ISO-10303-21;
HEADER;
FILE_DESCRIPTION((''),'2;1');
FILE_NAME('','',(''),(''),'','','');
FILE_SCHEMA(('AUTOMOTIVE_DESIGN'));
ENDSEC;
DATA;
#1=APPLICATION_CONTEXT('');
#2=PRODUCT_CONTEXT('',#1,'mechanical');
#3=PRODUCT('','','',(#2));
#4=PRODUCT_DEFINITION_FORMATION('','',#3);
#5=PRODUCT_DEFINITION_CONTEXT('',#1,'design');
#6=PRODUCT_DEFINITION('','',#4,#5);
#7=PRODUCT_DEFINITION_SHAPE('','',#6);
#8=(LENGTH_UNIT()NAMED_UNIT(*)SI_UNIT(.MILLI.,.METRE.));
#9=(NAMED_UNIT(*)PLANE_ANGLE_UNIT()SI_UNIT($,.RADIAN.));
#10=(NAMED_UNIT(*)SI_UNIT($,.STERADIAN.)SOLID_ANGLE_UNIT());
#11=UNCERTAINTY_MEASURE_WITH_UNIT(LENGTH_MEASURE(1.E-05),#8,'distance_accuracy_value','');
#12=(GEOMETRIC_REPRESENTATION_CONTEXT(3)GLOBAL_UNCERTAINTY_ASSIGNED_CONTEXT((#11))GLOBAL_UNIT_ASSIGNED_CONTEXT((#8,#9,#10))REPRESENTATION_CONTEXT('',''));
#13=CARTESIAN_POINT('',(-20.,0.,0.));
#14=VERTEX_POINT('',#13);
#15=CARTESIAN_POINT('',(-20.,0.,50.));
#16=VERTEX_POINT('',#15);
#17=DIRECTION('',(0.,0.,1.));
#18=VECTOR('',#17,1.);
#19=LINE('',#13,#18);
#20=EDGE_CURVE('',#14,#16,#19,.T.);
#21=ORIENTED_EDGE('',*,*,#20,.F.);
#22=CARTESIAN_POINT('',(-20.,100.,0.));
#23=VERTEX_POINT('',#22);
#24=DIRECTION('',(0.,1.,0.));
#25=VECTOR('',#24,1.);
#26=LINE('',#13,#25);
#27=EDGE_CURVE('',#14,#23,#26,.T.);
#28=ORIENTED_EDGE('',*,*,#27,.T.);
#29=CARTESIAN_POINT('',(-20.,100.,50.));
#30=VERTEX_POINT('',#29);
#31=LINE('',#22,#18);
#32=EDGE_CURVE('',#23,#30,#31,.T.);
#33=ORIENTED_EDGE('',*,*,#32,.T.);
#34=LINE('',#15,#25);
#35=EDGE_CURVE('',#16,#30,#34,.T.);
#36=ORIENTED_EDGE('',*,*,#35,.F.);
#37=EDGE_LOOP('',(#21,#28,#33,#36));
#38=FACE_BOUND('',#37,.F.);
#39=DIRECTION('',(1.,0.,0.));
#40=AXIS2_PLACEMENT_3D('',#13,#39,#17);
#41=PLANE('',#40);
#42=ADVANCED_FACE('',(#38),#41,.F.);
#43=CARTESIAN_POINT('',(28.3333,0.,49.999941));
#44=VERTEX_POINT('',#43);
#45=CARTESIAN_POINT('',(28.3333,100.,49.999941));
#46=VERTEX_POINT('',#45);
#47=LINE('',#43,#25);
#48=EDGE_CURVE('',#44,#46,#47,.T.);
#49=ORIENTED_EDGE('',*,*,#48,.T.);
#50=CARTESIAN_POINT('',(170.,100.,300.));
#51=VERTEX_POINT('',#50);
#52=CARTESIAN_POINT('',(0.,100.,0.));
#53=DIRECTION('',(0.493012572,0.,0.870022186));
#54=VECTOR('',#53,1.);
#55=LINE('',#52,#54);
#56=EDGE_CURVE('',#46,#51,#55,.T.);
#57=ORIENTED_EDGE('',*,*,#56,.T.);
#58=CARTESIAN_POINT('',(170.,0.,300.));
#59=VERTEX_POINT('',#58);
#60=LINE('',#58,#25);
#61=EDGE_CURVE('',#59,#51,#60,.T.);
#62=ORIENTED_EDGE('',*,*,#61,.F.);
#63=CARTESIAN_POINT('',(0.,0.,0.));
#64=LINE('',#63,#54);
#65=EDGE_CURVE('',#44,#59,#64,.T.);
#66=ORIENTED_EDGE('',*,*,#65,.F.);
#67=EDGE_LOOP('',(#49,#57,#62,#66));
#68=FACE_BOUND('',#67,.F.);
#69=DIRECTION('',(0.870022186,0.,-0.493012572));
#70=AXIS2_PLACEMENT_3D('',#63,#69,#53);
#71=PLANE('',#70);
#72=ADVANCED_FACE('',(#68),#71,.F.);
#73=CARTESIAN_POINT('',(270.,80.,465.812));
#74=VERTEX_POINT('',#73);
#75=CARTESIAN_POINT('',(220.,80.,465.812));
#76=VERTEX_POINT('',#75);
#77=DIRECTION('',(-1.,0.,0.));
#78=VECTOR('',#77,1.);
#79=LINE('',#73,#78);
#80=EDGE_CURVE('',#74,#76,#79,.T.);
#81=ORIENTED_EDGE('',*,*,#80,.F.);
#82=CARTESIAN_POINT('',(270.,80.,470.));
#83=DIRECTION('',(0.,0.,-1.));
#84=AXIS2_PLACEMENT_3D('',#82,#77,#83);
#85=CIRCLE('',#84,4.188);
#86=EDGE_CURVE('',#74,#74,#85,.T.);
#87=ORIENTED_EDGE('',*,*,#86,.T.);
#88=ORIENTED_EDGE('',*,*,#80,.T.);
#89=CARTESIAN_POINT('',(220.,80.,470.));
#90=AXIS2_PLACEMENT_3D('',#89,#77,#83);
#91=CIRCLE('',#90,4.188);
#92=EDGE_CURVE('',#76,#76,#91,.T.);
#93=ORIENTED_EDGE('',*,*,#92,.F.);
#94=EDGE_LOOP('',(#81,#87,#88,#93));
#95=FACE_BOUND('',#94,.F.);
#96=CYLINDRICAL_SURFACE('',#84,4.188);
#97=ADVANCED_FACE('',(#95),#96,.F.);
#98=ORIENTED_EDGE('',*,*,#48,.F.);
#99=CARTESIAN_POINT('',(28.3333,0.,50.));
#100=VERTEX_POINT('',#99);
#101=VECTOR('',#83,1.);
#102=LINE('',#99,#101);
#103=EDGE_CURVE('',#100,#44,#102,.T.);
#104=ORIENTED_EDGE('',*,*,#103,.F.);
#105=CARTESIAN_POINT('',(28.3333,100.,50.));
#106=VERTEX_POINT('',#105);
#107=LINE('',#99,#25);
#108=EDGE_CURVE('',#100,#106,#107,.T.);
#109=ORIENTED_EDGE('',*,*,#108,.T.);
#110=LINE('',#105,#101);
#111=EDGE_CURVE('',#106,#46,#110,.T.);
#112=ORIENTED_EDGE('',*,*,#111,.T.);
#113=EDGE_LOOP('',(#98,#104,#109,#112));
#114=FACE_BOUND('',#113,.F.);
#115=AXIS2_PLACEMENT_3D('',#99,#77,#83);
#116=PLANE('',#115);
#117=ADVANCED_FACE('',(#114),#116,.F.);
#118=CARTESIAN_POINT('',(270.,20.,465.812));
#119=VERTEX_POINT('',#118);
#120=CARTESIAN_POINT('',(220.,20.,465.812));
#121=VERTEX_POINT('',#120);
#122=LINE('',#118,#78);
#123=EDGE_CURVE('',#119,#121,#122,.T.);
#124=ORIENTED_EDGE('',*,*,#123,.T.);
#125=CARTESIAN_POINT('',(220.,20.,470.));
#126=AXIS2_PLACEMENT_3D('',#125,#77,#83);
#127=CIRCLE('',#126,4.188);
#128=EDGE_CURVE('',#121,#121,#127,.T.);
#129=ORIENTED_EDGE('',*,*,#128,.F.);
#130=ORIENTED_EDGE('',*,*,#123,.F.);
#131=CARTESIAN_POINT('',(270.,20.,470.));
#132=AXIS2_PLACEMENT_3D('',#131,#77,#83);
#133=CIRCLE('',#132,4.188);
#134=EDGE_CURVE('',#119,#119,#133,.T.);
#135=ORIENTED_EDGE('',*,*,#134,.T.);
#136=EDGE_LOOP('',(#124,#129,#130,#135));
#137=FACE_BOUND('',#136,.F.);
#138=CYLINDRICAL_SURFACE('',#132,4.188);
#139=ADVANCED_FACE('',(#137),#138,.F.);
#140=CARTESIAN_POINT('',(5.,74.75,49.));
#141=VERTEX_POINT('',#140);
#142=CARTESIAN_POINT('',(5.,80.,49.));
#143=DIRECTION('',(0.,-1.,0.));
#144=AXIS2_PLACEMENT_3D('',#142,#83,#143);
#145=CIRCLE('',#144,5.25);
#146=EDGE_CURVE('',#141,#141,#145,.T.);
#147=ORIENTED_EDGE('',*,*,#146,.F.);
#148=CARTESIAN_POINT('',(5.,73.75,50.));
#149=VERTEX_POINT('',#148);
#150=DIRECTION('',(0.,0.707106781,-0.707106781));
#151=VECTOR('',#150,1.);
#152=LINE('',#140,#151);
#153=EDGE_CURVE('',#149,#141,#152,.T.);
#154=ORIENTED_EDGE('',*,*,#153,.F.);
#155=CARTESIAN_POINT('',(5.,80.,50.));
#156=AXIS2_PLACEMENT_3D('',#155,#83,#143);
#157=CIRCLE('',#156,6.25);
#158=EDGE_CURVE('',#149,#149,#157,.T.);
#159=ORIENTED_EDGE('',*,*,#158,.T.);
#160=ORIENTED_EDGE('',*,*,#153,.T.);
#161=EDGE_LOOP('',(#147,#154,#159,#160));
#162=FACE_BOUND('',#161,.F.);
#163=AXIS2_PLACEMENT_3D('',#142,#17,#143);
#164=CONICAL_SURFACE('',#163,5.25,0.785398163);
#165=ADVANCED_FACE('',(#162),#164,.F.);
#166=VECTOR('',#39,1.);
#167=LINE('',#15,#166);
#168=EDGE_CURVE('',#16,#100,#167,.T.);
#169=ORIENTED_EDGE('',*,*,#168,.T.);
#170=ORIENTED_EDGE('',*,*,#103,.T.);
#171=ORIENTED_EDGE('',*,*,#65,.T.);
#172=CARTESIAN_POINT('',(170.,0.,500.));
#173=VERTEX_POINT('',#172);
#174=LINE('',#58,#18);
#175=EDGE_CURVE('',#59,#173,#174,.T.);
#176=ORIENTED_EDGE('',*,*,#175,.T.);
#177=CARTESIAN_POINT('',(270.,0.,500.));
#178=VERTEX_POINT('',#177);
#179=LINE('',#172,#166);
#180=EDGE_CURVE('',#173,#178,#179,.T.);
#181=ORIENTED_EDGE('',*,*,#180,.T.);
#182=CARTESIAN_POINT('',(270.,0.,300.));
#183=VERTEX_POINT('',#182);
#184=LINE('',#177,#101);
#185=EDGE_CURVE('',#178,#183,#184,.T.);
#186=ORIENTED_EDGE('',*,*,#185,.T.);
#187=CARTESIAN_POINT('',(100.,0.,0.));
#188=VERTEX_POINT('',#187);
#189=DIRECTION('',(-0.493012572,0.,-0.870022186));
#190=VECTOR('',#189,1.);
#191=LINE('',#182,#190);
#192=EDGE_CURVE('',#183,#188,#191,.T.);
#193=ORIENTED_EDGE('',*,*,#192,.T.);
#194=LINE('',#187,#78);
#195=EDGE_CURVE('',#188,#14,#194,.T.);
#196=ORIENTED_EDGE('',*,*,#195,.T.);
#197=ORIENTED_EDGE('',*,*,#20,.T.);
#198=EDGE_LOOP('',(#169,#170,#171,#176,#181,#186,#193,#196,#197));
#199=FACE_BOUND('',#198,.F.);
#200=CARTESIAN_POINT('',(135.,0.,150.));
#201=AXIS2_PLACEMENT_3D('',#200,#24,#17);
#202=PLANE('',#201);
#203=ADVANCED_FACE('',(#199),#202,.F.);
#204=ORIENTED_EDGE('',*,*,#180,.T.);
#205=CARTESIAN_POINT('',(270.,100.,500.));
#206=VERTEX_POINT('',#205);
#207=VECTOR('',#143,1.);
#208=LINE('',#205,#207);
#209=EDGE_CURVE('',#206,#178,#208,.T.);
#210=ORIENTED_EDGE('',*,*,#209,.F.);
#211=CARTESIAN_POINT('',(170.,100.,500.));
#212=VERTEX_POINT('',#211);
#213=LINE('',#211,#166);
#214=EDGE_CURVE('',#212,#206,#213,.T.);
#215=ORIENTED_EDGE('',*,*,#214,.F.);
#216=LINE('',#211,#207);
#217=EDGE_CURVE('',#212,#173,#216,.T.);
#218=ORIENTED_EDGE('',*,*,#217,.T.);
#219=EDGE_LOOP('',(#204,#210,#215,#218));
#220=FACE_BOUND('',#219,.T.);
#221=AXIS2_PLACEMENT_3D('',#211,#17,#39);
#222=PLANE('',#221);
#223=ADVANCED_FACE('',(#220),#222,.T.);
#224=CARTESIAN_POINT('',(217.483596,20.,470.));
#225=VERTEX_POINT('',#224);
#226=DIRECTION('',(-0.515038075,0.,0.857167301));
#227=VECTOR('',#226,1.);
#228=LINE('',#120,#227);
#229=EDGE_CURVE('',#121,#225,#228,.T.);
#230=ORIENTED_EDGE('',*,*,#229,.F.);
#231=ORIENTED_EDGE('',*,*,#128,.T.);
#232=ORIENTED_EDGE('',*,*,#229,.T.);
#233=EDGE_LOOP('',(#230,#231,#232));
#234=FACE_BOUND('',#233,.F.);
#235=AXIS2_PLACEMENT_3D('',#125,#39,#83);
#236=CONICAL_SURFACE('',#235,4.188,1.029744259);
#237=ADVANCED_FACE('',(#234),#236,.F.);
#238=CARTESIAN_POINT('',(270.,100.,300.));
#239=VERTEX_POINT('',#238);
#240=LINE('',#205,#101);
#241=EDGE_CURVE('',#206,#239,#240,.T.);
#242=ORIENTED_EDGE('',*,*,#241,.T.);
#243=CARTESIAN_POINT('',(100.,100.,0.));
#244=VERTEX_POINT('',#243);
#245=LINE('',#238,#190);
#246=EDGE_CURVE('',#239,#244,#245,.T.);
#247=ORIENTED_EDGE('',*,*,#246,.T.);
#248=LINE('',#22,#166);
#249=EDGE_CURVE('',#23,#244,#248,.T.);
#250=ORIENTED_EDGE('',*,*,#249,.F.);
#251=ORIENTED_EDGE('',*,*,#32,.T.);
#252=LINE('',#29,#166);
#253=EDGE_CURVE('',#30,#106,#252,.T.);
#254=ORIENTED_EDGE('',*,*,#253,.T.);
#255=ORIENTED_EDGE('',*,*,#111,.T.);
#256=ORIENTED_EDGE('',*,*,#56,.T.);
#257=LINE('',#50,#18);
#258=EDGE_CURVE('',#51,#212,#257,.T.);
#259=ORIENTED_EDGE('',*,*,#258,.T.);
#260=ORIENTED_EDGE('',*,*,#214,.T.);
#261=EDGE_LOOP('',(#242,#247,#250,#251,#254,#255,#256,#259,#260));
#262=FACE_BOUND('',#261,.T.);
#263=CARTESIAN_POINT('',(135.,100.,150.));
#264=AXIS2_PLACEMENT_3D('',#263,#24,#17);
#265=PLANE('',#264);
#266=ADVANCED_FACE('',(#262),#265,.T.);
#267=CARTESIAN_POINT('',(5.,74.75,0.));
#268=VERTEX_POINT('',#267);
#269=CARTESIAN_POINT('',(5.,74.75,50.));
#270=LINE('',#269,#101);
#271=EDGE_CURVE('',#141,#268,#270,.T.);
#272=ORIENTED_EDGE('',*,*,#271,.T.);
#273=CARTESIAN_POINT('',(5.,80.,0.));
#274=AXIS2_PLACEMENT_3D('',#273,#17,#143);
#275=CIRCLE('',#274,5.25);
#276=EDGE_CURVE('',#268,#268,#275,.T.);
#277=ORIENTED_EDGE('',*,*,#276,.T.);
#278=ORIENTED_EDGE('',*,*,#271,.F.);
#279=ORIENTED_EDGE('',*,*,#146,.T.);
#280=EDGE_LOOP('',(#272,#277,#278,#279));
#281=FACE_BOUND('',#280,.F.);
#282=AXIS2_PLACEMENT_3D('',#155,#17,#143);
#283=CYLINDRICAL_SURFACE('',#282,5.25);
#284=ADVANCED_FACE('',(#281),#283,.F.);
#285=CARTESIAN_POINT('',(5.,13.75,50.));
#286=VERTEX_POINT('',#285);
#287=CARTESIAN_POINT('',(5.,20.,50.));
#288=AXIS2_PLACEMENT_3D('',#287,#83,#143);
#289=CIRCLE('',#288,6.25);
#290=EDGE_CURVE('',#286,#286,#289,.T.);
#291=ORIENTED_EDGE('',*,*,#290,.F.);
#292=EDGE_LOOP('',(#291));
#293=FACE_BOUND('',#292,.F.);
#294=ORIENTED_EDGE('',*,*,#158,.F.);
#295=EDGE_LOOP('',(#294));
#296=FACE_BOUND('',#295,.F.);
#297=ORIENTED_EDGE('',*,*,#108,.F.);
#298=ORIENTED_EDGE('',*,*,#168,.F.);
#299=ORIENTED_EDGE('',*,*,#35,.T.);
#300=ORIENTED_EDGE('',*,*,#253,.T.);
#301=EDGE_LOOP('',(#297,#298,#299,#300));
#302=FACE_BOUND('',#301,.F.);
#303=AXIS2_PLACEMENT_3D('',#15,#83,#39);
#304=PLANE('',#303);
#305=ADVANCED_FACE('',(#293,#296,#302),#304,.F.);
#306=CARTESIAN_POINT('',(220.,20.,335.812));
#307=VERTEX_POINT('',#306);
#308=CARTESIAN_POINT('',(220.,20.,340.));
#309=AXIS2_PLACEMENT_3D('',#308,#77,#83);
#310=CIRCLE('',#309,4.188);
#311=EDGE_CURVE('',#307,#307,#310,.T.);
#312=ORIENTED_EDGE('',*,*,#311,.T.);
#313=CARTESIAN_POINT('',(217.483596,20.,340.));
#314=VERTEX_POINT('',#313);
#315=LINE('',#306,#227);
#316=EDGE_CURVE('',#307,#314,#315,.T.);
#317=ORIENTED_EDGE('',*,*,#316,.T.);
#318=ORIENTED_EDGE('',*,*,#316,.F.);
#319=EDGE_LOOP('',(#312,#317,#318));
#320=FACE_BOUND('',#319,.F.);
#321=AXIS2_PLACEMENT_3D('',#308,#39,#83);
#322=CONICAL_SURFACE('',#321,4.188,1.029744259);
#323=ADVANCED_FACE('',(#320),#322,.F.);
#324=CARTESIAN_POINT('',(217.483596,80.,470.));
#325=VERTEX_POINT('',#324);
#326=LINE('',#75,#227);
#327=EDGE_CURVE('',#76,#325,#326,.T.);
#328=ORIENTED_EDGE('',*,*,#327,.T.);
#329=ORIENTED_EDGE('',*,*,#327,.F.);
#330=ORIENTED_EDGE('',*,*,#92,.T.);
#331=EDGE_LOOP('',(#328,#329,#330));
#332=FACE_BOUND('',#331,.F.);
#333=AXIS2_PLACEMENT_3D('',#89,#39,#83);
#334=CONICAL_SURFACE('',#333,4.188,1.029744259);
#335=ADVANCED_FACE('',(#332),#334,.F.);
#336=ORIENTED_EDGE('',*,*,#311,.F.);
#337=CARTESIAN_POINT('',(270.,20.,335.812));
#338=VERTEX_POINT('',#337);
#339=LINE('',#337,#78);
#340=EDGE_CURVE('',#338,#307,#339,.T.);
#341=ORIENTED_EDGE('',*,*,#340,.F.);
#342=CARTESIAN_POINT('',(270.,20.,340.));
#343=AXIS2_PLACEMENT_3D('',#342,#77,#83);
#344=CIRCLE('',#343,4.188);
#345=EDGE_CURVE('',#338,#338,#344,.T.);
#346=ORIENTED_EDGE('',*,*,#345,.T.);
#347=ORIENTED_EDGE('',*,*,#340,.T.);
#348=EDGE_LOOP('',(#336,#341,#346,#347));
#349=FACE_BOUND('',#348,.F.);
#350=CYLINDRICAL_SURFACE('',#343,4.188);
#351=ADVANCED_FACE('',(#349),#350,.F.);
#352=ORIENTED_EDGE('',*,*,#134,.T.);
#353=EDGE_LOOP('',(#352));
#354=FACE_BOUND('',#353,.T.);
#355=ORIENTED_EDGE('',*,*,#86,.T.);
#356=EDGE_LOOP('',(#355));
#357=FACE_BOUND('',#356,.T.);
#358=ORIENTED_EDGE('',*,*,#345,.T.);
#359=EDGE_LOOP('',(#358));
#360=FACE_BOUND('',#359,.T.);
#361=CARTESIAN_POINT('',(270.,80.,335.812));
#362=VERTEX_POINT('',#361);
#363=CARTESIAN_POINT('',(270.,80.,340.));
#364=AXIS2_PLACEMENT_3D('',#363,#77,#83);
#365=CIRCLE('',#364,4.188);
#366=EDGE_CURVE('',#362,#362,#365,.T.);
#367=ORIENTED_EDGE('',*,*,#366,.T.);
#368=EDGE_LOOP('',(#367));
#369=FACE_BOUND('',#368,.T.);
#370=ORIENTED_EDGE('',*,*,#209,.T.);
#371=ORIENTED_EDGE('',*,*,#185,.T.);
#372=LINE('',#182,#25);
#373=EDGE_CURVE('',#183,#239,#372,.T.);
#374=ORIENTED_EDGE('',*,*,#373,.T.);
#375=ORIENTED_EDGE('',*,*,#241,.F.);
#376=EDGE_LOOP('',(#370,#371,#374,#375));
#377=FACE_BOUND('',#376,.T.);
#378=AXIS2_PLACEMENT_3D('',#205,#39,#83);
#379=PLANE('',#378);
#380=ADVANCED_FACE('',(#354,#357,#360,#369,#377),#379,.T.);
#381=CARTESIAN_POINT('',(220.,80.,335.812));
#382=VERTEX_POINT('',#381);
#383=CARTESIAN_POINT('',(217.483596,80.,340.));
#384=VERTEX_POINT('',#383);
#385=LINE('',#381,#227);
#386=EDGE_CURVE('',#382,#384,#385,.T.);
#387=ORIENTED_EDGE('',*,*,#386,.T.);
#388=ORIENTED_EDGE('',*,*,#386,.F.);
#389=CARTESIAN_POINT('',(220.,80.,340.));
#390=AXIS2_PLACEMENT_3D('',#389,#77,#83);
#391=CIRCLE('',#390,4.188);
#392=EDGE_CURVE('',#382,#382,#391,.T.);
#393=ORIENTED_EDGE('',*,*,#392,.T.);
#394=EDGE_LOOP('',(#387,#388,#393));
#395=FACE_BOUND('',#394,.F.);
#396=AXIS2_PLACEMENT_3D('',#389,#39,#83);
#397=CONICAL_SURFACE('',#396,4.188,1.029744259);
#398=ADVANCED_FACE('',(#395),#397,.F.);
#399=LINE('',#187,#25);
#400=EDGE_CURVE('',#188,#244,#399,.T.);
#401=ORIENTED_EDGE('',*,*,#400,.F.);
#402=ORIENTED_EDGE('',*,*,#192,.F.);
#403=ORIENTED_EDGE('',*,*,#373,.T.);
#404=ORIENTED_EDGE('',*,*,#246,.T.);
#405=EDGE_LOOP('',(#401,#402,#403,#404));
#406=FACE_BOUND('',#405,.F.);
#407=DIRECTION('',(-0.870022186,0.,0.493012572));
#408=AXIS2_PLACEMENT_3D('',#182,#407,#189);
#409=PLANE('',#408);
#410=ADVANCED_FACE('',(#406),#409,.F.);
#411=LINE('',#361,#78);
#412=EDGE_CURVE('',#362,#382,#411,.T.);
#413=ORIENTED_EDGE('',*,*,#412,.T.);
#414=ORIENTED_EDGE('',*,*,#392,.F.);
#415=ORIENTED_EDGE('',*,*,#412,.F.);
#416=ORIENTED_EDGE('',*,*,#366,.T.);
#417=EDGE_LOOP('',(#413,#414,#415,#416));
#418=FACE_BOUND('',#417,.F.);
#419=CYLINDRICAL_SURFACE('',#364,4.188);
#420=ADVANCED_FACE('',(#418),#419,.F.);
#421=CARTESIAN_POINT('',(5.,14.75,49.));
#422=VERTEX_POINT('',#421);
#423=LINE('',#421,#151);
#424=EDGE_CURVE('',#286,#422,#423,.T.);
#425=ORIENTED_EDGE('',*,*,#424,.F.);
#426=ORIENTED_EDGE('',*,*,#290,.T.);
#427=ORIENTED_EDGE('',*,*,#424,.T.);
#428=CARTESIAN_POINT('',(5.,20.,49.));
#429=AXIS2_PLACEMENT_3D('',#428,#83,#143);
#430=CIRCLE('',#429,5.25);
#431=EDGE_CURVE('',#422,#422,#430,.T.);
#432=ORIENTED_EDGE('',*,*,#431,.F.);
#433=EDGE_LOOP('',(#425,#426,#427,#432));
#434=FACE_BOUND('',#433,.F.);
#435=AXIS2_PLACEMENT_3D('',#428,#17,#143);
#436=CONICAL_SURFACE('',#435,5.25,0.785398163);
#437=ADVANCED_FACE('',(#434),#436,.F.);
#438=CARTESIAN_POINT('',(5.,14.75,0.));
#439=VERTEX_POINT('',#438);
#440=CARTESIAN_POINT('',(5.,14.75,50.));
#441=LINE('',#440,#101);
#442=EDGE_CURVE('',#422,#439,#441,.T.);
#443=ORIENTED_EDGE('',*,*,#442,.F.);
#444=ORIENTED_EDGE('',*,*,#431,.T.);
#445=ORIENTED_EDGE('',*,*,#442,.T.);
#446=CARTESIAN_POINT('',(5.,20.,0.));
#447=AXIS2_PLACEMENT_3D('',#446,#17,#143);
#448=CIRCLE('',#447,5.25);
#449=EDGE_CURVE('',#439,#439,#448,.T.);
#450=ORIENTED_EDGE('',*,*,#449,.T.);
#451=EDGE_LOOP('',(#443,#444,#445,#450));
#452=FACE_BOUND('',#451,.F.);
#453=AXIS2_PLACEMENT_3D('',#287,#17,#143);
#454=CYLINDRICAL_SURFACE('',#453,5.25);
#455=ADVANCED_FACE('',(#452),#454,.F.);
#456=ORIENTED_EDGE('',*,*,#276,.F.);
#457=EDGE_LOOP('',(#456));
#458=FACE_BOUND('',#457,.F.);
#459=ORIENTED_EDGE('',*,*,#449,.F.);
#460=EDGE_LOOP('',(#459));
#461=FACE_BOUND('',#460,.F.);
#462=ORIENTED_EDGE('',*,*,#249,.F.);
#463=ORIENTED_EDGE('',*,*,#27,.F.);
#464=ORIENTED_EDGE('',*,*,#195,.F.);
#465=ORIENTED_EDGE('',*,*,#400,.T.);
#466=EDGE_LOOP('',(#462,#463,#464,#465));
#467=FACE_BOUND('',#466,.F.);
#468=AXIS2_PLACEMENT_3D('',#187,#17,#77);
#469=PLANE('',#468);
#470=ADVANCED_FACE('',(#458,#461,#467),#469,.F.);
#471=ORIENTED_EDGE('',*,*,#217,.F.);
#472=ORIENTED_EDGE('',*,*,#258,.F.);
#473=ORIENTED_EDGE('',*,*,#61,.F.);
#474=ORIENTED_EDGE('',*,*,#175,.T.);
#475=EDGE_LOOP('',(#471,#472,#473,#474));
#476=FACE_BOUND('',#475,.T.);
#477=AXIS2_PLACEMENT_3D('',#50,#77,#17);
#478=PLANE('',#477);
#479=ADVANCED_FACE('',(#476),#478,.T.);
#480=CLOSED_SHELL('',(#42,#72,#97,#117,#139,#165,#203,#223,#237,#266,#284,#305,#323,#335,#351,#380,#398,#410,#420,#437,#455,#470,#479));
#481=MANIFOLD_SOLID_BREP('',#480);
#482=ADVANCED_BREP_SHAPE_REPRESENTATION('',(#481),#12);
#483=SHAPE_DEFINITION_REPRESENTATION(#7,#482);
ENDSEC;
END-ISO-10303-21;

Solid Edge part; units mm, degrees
sketch "Sketch1" plane through (0, 0, 0) normal (0, -1, 0) x (1, 0, 0)
  line L0 (270, 300) -> (100, 0)
  line L1 (100, 0) -> (0, 0)
  line L2 (0, 0) -> (170, 300)
  line L3 (170, 300) -> (270, 300)
extrude "Protrusion1" add sketch "Sketch1" against normal blind 100
sketch "Sketch2" plane through (136.6025, 0, 150) normal (0, -1, 0) x (1, 0, 0)
  line L0 (-108.2692, -100) -> (-108.2692, -150)
  line L1 (-156.6025, -100) -> (-108.2692, -100)
  line L2 (-156.6025, -150) -> (-156.6025, -100)
  line L3 (-136.6025, -150) -> (-156.6025, -150)
extrude "Extrusionsausprägung_2" add sketch "Sketch2" against normal blind 100 material side at (28.3833, 0, 25)
hole "Bohrung_1" at (5, 20, 50) direction (0, 0, -1) diameter 10.5 end up to next start chamfer 1 start chamfer angle 45
hole "Hole1" at (5, 80, 50) direction (0, 0, -1) diameter 10.5 end up to next start chamfer 1 start chamfer angle 45
sketch "Sketch3" plane through (126.0363, 100, 150) normal (0, 1, 0) x (1, 0, 0)
  line L0 (143.9637, -350) -> (143.9637, -150)
  line L1 (143.9637, -150) -> (43.9637, -150)
  line L2 (43.9637, -150) -> (43.9637, -350)
  line L3 (43.9637, -350) -> (143.9637, -350)
extrude "Extrusionsausprägung_3" add sketch "Sketch3" against normal blind 100
hole "Bohrung_5" at (270, 20, 470) direction (-1, 0, 0) diameter 8.376 depth 50 tip angle 118
hole "Hole2" at (270, 80, 470) direction (-1, 0, 0) diameter 8.376 depth 50 tip angle 118
hole "Hole3" at (270, 80, 340) direction (-1, 0, 0) diameter 8.376 depth 50 tip angle 118
hole "Hole4" at (270, 20, 340) direction (-1, 0, 0) diameter 8.376 depth 50 tip angle 118
